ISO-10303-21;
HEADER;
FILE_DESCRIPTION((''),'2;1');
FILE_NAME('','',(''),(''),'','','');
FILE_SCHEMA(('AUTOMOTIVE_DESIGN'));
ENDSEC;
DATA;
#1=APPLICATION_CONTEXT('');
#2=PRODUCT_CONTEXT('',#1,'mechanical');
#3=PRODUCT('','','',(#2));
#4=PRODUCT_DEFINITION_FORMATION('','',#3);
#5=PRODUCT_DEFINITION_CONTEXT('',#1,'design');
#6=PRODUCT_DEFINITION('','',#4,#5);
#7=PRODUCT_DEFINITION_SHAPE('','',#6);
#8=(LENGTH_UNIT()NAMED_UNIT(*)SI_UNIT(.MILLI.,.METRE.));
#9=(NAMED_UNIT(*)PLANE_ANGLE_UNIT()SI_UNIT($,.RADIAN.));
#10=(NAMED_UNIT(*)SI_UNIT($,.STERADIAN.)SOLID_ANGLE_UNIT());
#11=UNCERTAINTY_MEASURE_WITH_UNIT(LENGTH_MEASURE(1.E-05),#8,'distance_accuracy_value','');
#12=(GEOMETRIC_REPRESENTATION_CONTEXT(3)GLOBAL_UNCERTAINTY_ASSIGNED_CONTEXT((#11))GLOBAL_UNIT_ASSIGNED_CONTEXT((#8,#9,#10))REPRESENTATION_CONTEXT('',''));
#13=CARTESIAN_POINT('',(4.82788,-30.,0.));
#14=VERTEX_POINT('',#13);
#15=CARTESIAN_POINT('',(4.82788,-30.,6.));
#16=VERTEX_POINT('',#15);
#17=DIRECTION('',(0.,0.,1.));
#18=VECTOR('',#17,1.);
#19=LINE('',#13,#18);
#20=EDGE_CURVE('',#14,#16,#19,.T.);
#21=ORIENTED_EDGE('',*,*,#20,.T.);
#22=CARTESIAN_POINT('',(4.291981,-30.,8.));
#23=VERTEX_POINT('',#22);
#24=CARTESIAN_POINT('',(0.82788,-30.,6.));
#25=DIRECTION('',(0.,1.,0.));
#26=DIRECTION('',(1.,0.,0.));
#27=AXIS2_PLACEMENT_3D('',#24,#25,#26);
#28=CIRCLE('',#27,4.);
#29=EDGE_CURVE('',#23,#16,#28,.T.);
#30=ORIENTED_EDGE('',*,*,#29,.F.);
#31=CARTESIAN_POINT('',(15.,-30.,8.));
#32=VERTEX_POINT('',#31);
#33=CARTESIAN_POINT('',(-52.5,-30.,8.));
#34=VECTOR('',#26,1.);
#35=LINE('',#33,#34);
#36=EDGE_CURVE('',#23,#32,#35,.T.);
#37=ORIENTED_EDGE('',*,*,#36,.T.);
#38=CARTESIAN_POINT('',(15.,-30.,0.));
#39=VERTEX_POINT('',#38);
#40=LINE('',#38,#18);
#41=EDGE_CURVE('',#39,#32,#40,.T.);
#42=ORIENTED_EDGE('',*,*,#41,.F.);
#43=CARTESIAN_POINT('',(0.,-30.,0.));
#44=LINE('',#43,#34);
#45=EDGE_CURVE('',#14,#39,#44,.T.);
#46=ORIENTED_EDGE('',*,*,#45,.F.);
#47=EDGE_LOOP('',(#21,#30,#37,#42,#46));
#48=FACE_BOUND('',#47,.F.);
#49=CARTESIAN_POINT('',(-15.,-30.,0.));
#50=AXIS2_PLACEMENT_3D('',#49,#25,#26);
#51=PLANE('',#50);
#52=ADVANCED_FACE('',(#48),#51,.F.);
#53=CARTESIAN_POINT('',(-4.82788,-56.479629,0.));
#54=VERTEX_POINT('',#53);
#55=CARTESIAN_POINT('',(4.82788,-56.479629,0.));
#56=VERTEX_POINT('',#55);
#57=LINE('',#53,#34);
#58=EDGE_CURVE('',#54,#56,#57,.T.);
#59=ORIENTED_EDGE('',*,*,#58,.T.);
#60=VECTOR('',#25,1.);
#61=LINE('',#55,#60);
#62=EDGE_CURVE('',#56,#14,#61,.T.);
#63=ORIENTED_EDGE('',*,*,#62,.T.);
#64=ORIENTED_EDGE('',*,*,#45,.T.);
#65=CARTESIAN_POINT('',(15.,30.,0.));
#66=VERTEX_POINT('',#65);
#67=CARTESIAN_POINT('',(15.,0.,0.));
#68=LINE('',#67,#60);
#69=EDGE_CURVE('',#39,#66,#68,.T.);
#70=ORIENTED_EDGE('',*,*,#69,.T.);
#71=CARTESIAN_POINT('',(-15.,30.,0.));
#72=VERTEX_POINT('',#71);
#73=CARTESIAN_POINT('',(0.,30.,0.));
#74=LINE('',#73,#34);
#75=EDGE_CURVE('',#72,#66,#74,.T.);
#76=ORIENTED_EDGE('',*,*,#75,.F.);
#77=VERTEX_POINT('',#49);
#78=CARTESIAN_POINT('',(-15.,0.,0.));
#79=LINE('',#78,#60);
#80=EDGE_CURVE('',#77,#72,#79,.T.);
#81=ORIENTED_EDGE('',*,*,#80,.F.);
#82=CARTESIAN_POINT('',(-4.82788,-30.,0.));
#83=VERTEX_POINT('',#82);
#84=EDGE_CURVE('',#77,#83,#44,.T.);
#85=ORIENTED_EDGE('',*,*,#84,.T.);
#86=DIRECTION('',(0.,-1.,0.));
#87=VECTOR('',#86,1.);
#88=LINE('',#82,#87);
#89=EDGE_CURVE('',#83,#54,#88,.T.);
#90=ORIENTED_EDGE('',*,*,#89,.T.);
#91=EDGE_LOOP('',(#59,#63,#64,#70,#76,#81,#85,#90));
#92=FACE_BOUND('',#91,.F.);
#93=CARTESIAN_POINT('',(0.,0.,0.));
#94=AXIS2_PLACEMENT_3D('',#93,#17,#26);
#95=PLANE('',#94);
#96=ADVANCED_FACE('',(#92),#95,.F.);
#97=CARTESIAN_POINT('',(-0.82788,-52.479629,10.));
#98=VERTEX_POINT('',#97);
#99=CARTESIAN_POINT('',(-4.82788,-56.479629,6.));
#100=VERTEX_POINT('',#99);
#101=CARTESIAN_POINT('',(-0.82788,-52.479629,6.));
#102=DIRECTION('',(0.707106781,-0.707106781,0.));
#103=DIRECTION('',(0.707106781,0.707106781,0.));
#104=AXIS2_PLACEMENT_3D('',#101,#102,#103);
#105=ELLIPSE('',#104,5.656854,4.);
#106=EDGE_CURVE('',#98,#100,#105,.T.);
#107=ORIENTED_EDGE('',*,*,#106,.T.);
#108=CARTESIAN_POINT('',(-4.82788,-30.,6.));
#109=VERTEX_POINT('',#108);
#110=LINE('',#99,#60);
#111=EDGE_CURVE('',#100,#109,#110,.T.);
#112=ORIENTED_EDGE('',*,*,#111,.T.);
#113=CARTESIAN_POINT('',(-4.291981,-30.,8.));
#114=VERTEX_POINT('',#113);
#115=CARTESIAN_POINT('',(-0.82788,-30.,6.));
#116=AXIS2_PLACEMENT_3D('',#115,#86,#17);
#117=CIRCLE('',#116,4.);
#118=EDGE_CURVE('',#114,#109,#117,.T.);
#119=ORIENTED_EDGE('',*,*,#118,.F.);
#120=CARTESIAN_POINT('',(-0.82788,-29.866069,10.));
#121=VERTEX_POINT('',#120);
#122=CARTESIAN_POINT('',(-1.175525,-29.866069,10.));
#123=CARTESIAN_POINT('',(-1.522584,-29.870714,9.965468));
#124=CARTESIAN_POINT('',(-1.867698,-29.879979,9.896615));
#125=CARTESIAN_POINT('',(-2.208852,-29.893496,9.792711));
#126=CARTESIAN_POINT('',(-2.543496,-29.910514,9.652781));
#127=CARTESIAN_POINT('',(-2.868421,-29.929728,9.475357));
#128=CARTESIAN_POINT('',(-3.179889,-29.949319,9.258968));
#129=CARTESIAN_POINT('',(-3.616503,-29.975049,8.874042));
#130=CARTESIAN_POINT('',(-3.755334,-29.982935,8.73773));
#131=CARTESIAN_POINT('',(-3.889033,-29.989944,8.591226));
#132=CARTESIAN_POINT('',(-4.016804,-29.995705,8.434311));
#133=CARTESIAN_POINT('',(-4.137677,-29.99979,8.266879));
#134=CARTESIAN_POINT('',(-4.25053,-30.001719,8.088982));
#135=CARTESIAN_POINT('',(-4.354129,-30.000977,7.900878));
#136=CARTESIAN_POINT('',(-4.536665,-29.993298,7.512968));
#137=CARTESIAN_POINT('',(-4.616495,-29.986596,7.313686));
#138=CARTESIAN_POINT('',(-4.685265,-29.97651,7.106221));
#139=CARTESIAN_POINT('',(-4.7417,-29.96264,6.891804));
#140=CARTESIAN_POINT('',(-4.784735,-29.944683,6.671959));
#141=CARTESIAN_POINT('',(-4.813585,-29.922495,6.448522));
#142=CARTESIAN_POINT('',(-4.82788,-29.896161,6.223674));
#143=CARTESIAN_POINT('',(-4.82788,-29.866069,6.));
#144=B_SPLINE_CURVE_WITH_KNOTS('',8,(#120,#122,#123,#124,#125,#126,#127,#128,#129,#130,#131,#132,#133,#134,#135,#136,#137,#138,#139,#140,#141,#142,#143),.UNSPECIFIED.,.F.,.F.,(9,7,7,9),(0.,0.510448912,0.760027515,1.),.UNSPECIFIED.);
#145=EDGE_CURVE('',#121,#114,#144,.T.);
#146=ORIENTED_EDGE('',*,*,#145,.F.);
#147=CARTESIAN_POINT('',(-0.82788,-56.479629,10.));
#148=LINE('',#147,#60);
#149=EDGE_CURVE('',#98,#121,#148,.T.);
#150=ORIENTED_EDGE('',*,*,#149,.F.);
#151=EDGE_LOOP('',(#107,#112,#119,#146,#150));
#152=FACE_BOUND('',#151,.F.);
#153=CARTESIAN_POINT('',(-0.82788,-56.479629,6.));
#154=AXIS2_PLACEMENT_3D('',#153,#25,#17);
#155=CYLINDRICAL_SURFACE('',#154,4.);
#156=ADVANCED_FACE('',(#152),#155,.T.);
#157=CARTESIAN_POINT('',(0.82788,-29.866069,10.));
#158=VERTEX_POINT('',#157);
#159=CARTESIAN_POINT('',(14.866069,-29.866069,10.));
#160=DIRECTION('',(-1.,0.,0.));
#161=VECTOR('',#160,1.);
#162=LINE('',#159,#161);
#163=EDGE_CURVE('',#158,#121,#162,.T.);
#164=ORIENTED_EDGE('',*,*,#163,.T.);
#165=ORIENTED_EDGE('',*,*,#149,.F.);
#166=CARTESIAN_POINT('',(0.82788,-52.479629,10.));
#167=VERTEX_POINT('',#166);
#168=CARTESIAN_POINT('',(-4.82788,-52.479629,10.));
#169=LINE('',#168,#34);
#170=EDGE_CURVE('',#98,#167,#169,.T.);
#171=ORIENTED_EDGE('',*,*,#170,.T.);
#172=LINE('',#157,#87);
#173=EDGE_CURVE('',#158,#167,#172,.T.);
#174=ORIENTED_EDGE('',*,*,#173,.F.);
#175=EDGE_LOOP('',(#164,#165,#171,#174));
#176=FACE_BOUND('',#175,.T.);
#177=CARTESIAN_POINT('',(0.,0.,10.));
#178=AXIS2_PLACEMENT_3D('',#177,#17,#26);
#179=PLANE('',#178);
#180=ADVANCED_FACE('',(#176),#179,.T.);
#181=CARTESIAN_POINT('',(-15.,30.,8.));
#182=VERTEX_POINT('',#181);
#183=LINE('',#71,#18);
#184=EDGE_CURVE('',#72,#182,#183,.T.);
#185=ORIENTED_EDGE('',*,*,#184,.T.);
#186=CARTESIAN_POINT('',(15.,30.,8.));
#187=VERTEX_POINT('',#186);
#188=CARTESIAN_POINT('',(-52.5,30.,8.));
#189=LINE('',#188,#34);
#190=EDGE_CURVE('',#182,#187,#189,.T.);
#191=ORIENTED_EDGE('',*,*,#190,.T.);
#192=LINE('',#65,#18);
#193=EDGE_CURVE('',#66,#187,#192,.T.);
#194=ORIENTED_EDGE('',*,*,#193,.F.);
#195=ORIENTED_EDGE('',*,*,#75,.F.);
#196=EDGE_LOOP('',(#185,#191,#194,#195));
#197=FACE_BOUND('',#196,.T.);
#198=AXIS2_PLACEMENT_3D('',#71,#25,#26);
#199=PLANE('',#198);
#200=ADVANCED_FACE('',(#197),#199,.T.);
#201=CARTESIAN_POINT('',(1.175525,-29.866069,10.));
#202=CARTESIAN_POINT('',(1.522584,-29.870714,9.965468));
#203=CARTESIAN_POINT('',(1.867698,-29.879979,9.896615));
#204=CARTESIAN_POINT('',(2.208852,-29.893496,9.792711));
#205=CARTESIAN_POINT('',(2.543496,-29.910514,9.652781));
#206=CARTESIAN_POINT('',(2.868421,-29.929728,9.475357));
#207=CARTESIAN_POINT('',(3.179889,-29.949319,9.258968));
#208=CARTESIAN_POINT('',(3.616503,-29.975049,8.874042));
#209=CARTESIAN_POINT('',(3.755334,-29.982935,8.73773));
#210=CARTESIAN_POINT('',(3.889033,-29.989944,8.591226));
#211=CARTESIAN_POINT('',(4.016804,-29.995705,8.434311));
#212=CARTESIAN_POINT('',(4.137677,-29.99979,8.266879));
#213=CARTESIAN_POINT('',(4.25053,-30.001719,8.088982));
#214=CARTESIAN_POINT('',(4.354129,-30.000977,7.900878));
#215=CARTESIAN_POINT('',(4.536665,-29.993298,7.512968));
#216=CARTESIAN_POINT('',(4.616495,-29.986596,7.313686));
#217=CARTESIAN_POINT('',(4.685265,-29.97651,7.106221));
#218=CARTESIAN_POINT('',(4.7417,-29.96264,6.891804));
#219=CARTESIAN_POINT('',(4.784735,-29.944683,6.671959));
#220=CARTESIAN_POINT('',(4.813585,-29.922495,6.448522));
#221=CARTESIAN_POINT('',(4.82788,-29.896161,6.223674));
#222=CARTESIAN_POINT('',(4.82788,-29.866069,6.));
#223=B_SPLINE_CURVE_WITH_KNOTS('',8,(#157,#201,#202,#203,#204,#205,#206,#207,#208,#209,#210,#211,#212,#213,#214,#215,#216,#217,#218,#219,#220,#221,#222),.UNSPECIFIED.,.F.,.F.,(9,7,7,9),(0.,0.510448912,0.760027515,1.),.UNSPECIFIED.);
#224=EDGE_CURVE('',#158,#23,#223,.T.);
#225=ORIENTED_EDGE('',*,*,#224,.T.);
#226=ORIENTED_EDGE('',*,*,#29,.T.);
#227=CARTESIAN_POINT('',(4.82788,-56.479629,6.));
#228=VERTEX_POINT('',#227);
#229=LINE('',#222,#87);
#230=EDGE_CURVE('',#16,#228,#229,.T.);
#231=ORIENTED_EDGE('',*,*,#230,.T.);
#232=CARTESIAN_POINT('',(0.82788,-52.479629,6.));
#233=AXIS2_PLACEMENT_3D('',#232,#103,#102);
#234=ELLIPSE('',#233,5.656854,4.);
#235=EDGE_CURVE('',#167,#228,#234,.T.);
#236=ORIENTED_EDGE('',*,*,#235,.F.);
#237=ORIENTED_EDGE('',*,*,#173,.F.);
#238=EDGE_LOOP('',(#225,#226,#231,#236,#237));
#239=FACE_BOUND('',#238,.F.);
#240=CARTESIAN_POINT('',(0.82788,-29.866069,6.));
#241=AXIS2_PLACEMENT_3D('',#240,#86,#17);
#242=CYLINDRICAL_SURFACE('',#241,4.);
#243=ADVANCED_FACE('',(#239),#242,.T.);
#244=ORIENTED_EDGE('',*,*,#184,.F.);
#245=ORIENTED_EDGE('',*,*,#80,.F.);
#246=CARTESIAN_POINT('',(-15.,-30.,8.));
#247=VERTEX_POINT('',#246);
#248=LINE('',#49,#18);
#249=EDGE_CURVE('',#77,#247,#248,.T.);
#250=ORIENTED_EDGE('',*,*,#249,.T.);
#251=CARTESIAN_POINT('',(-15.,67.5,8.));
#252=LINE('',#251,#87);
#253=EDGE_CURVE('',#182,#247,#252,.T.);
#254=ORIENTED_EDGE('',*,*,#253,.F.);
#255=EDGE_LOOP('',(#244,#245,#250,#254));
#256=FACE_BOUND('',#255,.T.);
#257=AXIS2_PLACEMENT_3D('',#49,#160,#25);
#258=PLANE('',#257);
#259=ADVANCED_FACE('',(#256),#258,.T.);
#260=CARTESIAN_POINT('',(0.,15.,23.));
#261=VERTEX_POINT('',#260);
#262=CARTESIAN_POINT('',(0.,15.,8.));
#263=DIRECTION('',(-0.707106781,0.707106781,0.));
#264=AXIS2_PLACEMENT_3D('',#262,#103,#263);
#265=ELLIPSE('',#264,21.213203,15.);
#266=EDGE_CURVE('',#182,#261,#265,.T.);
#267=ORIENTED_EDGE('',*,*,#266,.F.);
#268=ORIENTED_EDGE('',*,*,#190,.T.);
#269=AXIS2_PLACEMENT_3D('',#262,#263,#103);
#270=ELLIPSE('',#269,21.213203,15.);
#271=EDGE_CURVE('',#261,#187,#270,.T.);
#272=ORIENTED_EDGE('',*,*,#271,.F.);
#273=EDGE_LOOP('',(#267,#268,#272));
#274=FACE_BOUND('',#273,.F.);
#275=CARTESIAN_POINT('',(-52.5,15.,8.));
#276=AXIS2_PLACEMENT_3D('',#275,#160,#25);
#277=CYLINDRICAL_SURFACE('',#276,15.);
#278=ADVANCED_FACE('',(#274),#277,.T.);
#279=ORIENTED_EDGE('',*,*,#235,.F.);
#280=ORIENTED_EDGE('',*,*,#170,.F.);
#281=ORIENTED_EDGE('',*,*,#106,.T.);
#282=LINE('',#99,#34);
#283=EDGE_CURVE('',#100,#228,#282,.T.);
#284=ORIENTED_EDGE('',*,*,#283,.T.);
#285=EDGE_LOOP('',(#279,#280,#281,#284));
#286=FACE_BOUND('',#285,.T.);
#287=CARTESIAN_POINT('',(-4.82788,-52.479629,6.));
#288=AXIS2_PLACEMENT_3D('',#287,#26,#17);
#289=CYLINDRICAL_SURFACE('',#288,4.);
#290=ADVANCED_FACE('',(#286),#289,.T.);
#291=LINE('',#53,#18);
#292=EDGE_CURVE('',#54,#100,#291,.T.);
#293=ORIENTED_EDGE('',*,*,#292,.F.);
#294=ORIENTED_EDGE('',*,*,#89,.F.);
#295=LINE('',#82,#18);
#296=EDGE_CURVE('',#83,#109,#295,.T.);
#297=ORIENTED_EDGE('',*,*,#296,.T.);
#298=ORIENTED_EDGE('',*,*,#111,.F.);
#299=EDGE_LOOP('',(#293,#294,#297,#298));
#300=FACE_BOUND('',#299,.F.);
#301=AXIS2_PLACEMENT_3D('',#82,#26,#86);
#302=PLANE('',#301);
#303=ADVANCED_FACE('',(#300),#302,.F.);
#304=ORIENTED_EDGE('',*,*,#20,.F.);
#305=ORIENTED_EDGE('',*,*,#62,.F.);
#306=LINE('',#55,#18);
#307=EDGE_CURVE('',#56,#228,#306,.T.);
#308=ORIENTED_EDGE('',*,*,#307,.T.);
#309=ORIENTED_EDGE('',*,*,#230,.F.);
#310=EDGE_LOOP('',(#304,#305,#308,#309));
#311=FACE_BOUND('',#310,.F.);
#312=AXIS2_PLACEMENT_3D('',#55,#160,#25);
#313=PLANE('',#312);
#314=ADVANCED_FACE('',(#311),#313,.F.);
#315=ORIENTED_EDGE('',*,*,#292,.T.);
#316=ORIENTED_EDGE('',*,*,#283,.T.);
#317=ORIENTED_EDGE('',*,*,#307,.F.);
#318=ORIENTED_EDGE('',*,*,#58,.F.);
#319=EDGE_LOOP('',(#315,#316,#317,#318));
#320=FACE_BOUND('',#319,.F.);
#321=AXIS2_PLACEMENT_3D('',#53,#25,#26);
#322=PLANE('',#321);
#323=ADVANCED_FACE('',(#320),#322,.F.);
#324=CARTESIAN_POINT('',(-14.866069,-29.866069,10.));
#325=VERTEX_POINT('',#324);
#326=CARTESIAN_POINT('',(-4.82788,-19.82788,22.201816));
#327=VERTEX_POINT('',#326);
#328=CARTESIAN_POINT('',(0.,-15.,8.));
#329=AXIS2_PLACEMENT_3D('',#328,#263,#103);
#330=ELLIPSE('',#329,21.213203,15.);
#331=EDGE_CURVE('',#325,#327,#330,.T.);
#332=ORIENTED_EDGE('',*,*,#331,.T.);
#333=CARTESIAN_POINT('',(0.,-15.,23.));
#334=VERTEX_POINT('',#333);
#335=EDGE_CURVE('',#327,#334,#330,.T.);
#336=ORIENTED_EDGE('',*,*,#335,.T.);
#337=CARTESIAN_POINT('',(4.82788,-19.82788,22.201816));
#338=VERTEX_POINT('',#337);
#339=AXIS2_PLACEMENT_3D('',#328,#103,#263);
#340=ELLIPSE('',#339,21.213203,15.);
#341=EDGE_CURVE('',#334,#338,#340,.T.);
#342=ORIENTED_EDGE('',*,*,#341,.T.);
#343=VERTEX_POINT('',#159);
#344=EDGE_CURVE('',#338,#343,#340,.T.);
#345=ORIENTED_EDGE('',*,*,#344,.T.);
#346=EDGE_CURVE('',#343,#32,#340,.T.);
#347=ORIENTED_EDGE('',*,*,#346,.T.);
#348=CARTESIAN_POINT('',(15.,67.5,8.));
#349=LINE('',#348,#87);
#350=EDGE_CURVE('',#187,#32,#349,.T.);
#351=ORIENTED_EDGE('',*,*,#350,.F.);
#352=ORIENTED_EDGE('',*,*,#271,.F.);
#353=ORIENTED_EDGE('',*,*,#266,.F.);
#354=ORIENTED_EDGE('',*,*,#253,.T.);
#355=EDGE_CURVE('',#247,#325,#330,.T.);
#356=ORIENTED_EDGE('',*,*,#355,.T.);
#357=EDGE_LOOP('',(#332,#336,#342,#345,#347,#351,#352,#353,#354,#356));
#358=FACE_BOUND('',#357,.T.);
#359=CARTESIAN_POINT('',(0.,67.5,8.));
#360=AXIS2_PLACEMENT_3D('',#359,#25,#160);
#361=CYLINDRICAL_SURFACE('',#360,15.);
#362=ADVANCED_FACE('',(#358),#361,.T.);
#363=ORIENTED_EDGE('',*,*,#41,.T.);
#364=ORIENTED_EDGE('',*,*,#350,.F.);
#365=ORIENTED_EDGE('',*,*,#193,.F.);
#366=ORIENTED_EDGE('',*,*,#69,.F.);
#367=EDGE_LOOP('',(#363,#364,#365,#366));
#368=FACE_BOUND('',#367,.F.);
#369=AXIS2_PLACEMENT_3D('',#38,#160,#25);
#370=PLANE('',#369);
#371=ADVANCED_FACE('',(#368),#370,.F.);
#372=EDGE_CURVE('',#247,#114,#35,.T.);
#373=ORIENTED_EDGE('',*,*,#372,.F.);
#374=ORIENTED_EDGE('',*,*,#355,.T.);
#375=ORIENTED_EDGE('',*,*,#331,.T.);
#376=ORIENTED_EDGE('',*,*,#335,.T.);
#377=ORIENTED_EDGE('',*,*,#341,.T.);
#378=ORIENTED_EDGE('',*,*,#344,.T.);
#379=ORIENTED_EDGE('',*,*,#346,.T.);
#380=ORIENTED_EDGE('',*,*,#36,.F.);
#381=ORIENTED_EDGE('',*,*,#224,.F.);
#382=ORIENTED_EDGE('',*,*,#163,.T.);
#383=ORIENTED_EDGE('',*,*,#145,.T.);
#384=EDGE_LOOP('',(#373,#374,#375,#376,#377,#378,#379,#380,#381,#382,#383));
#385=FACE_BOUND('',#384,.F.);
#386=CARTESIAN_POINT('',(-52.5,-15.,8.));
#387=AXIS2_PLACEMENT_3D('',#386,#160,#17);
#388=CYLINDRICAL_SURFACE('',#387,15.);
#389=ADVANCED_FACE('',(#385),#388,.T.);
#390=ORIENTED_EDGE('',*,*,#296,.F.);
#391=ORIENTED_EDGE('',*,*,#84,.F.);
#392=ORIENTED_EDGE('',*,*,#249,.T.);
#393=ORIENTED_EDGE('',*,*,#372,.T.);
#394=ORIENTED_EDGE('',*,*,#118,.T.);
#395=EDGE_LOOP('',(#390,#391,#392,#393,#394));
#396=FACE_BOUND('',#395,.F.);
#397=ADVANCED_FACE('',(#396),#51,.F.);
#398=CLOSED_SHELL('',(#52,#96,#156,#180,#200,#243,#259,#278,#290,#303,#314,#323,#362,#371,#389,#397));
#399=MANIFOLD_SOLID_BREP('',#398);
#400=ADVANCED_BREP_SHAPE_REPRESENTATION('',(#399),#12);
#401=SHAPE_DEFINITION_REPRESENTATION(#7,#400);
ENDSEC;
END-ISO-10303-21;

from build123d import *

# Parameters (mm, degrees)
F0_W         = 30
F0_H         = 60
F2_DEPTH     = 23
F3_DEPTH     = 10
F4_T1_DEPTH  = 135
F4_T3_DEPTH  = 105
F4_T8_DEPTH  = 105
F4_T14_DEPTH = 105
F4_T20_DEPTH = 105
F4_T27_DEPTH = 105
F4_T33_DEPTH = 105
F5_R         = 4


# Not quite as in the source:
# - a fillet or chamfer that OpenCascade refuses, or shapes differently, is made with other operations: its cross-section is extruded or revolved along the edge and cut away or added


with BuildPart() as f2:
    # F0 (on Top) → F2 (new body)
    with BuildSketch(Plane.XY):
        Rectangle(F0_W, F0_H)
    extrude(amount=F2_DEPTH)

    # F1 (on face) → F3 (join)
    with BuildSketch(Plane.XY):
        Polygon((4.8278798349, -30), (-4.8278798349, -30), (-4.8278798349, -56.4796291292), (0, -56.4796291292), (4.8278798349, -56.4796291292), align=None)
    extrude(amount=F3_DEPTH)

    # F4: fillet of radius 15 on 4 edges, made by hand

    # F4_s2 → F4_t1 (cut)
    with BuildSketch(Plane.XZ.offset(-67.5)):
        with BuildLine():
            ThreePointArc((-15, 8), (-10.6066017178, 18.6066017178), (0, 23))
            Line((0, 23), (-15, 23))
            Line((-15, 23), (-15, 8))
        make_face()
        with BuildLine():
            ThreePointArc((15, 8), (10.6066017178, 18.6066017178), (0, 23))
            Line((0, 23), (15, 23))
            Line((15, 23), (15, 8))
        make_face()
    extrude(amount=F4_T1_DEPTH, mode=Mode.SUBTRACT)

    # F4_s4 → F4_t3 (cut)
    with BuildSketch(Plane.YZ.offset(-52.5)):
        with BuildLine():
            ThreePointArc((30, 8), (25.6066017178, 18.6066017178), (15, 23))
            Line((15, 23), (30, 23))
            Line((30, 23), (30, 8))
        make_face()
    extrude(amount=F4_T3_DEPTH, mode=Mode.SUBTRACT)


with BuildPart() as f4_tool6:
    # F4_s7 → F4_t8 (new body)
    with BuildSketch(Plane.YZ.offset(-52.5)):
        with BuildLine():
            ThreePointArc((-15, 23), (-25.6066017178, 18.6066017178), (-30, 8))
            Line((-30, 8), (-30, 23))
            Line((-30, 23), (-15, 23))
        make_face()
    extrude(amount=F4_T8_DEPTH)

    split(bisect_by=Plane.YZ.offset(-4.8278798349), keep=Keep.BOTTOM)

    split(bisect_by=Plane.XY.offset(10), keep=Keep.TOP)


with BuildPart() as f2_1:
    add(f2.part)

    # F4_t5: cut F4_tool6
    add(f4_tool6.part, mode=Mode.SUBTRACT)


with BuildPart() as f4_tool12:
    # F4_s13 → F4_t14 (new body)
    with BuildSketch(Plane.YZ.offset(-52.5)):
        with BuildLine():
            ThreePointArc((-15, 23), (-25.6066017178, 18.6066017178), (-30, 8))
            Line((-30, 8), (-30, 23))
            Line((-30, 23), (-15, 23))
        make_face()
    extrude(amount=F4_T14_DEPTH)

    split(bisect_by=Plane.YZ.offset(-4.8278798349), keep=Keep.BOTTOM)

    split(bisect_by=Plane.XY.offset(10), keep=Keep.BOTTOM)


with BuildPart() as f2_2:
    add(f2_1.part)

    # F4_t11: cut F4_tool12
    add(f4_tool12.part, mode=Mode.SUBTRACT)


with BuildPart() as f4_tool18:
    # F4_s19 → F4_t20 (new body)
    with BuildSketch(Plane.YZ.offset(-52.5)):
        with BuildLine():
            ThreePointArc((-15, 23), (-25.6066017178, 18.6066017178), (-30, 8))
            Line((-30, 8), (-30, 23))
            Line((-30, 23), (-15, 23))
        make_face()
    extrude(amount=F4_T20_DEPTH)

    split(bisect_by=Plane.YZ.offset(-4.8278798349), keep=Keep.TOP)

    split(bisect_by=Plane.XY.offset(10), keep=Keep.TOP)

    split(bisect_by=Plane.YZ.offset(4.8278798349), keep=Keep.BOTTOM)


with BuildPart() as f2_3:
    add(f2_2.part)

    # F4_t17: cut F4_tool18
    add(f4_tool18.part, mode=Mode.SUBTRACT)


with BuildPart() as f4_tool25:
    # F4_s26 → F4_t27 (new body)
    with BuildSketch(Plane.YZ.offset(-52.5)):
        with BuildLine():
            ThreePointArc((-15, 23), (-25.6066017178, 18.6066017178), (-30, 8))
            Line((-30, 8), (-30, 23))
            Line((-30, 23), (-15, 23))
        make_face()
    extrude(amount=F4_T27_DEPTH)

    split(bisect_by=Plane.XY.offset(10), keep=Keep.TOP)

    split(bisect_by=Plane.YZ.offset(4.8278798349), keep=Keep.TOP)


with BuildPart() as f2_4:
    add(f2_3.part)

    # F4_t24: cut F4_tool25
    add(f4_tool25.part, mode=Mode.SUBTRACT)


with BuildPart() as f4_tool31:
    # F4_s32 → F4_t33 (new body)
    with BuildSketch(Plane.YZ.offset(-52.5)):
        with BuildLine():
            ThreePointArc((-15, 23), (-25.6066017178, 18.6066017178), (-30, 8))
            Line((-30, 8), (-30, 23))
            Line((-30, 23), (-15, 23))
        make_face()
    extrude(amount=F4_T33_DEPTH)

    split(bisect_by=Plane.XY.offset(10), keep=Keep.BOTTOM)

    split(bisect_by=Plane.YZ.offset(4.8278798349), keep=Keep.TOP)


with BuildPart() as f2_5:
    add(f2_4.part)

    # F4_t30: cut F4_tool31
    add(f4_tool31.part, mode=Mode.SUBTRACT)

    # F5
    f5_edges = [f2_5.edges().sort_by_distance(p)[0] for p in [
        (-4.82788, -43.172849, 10),
        (4.82788, -43.172849, 10),
        (0, -56.479629, 10),
    ]]
    fillet(f5_edges, radius=F5_R)


solid = f2_5.part
